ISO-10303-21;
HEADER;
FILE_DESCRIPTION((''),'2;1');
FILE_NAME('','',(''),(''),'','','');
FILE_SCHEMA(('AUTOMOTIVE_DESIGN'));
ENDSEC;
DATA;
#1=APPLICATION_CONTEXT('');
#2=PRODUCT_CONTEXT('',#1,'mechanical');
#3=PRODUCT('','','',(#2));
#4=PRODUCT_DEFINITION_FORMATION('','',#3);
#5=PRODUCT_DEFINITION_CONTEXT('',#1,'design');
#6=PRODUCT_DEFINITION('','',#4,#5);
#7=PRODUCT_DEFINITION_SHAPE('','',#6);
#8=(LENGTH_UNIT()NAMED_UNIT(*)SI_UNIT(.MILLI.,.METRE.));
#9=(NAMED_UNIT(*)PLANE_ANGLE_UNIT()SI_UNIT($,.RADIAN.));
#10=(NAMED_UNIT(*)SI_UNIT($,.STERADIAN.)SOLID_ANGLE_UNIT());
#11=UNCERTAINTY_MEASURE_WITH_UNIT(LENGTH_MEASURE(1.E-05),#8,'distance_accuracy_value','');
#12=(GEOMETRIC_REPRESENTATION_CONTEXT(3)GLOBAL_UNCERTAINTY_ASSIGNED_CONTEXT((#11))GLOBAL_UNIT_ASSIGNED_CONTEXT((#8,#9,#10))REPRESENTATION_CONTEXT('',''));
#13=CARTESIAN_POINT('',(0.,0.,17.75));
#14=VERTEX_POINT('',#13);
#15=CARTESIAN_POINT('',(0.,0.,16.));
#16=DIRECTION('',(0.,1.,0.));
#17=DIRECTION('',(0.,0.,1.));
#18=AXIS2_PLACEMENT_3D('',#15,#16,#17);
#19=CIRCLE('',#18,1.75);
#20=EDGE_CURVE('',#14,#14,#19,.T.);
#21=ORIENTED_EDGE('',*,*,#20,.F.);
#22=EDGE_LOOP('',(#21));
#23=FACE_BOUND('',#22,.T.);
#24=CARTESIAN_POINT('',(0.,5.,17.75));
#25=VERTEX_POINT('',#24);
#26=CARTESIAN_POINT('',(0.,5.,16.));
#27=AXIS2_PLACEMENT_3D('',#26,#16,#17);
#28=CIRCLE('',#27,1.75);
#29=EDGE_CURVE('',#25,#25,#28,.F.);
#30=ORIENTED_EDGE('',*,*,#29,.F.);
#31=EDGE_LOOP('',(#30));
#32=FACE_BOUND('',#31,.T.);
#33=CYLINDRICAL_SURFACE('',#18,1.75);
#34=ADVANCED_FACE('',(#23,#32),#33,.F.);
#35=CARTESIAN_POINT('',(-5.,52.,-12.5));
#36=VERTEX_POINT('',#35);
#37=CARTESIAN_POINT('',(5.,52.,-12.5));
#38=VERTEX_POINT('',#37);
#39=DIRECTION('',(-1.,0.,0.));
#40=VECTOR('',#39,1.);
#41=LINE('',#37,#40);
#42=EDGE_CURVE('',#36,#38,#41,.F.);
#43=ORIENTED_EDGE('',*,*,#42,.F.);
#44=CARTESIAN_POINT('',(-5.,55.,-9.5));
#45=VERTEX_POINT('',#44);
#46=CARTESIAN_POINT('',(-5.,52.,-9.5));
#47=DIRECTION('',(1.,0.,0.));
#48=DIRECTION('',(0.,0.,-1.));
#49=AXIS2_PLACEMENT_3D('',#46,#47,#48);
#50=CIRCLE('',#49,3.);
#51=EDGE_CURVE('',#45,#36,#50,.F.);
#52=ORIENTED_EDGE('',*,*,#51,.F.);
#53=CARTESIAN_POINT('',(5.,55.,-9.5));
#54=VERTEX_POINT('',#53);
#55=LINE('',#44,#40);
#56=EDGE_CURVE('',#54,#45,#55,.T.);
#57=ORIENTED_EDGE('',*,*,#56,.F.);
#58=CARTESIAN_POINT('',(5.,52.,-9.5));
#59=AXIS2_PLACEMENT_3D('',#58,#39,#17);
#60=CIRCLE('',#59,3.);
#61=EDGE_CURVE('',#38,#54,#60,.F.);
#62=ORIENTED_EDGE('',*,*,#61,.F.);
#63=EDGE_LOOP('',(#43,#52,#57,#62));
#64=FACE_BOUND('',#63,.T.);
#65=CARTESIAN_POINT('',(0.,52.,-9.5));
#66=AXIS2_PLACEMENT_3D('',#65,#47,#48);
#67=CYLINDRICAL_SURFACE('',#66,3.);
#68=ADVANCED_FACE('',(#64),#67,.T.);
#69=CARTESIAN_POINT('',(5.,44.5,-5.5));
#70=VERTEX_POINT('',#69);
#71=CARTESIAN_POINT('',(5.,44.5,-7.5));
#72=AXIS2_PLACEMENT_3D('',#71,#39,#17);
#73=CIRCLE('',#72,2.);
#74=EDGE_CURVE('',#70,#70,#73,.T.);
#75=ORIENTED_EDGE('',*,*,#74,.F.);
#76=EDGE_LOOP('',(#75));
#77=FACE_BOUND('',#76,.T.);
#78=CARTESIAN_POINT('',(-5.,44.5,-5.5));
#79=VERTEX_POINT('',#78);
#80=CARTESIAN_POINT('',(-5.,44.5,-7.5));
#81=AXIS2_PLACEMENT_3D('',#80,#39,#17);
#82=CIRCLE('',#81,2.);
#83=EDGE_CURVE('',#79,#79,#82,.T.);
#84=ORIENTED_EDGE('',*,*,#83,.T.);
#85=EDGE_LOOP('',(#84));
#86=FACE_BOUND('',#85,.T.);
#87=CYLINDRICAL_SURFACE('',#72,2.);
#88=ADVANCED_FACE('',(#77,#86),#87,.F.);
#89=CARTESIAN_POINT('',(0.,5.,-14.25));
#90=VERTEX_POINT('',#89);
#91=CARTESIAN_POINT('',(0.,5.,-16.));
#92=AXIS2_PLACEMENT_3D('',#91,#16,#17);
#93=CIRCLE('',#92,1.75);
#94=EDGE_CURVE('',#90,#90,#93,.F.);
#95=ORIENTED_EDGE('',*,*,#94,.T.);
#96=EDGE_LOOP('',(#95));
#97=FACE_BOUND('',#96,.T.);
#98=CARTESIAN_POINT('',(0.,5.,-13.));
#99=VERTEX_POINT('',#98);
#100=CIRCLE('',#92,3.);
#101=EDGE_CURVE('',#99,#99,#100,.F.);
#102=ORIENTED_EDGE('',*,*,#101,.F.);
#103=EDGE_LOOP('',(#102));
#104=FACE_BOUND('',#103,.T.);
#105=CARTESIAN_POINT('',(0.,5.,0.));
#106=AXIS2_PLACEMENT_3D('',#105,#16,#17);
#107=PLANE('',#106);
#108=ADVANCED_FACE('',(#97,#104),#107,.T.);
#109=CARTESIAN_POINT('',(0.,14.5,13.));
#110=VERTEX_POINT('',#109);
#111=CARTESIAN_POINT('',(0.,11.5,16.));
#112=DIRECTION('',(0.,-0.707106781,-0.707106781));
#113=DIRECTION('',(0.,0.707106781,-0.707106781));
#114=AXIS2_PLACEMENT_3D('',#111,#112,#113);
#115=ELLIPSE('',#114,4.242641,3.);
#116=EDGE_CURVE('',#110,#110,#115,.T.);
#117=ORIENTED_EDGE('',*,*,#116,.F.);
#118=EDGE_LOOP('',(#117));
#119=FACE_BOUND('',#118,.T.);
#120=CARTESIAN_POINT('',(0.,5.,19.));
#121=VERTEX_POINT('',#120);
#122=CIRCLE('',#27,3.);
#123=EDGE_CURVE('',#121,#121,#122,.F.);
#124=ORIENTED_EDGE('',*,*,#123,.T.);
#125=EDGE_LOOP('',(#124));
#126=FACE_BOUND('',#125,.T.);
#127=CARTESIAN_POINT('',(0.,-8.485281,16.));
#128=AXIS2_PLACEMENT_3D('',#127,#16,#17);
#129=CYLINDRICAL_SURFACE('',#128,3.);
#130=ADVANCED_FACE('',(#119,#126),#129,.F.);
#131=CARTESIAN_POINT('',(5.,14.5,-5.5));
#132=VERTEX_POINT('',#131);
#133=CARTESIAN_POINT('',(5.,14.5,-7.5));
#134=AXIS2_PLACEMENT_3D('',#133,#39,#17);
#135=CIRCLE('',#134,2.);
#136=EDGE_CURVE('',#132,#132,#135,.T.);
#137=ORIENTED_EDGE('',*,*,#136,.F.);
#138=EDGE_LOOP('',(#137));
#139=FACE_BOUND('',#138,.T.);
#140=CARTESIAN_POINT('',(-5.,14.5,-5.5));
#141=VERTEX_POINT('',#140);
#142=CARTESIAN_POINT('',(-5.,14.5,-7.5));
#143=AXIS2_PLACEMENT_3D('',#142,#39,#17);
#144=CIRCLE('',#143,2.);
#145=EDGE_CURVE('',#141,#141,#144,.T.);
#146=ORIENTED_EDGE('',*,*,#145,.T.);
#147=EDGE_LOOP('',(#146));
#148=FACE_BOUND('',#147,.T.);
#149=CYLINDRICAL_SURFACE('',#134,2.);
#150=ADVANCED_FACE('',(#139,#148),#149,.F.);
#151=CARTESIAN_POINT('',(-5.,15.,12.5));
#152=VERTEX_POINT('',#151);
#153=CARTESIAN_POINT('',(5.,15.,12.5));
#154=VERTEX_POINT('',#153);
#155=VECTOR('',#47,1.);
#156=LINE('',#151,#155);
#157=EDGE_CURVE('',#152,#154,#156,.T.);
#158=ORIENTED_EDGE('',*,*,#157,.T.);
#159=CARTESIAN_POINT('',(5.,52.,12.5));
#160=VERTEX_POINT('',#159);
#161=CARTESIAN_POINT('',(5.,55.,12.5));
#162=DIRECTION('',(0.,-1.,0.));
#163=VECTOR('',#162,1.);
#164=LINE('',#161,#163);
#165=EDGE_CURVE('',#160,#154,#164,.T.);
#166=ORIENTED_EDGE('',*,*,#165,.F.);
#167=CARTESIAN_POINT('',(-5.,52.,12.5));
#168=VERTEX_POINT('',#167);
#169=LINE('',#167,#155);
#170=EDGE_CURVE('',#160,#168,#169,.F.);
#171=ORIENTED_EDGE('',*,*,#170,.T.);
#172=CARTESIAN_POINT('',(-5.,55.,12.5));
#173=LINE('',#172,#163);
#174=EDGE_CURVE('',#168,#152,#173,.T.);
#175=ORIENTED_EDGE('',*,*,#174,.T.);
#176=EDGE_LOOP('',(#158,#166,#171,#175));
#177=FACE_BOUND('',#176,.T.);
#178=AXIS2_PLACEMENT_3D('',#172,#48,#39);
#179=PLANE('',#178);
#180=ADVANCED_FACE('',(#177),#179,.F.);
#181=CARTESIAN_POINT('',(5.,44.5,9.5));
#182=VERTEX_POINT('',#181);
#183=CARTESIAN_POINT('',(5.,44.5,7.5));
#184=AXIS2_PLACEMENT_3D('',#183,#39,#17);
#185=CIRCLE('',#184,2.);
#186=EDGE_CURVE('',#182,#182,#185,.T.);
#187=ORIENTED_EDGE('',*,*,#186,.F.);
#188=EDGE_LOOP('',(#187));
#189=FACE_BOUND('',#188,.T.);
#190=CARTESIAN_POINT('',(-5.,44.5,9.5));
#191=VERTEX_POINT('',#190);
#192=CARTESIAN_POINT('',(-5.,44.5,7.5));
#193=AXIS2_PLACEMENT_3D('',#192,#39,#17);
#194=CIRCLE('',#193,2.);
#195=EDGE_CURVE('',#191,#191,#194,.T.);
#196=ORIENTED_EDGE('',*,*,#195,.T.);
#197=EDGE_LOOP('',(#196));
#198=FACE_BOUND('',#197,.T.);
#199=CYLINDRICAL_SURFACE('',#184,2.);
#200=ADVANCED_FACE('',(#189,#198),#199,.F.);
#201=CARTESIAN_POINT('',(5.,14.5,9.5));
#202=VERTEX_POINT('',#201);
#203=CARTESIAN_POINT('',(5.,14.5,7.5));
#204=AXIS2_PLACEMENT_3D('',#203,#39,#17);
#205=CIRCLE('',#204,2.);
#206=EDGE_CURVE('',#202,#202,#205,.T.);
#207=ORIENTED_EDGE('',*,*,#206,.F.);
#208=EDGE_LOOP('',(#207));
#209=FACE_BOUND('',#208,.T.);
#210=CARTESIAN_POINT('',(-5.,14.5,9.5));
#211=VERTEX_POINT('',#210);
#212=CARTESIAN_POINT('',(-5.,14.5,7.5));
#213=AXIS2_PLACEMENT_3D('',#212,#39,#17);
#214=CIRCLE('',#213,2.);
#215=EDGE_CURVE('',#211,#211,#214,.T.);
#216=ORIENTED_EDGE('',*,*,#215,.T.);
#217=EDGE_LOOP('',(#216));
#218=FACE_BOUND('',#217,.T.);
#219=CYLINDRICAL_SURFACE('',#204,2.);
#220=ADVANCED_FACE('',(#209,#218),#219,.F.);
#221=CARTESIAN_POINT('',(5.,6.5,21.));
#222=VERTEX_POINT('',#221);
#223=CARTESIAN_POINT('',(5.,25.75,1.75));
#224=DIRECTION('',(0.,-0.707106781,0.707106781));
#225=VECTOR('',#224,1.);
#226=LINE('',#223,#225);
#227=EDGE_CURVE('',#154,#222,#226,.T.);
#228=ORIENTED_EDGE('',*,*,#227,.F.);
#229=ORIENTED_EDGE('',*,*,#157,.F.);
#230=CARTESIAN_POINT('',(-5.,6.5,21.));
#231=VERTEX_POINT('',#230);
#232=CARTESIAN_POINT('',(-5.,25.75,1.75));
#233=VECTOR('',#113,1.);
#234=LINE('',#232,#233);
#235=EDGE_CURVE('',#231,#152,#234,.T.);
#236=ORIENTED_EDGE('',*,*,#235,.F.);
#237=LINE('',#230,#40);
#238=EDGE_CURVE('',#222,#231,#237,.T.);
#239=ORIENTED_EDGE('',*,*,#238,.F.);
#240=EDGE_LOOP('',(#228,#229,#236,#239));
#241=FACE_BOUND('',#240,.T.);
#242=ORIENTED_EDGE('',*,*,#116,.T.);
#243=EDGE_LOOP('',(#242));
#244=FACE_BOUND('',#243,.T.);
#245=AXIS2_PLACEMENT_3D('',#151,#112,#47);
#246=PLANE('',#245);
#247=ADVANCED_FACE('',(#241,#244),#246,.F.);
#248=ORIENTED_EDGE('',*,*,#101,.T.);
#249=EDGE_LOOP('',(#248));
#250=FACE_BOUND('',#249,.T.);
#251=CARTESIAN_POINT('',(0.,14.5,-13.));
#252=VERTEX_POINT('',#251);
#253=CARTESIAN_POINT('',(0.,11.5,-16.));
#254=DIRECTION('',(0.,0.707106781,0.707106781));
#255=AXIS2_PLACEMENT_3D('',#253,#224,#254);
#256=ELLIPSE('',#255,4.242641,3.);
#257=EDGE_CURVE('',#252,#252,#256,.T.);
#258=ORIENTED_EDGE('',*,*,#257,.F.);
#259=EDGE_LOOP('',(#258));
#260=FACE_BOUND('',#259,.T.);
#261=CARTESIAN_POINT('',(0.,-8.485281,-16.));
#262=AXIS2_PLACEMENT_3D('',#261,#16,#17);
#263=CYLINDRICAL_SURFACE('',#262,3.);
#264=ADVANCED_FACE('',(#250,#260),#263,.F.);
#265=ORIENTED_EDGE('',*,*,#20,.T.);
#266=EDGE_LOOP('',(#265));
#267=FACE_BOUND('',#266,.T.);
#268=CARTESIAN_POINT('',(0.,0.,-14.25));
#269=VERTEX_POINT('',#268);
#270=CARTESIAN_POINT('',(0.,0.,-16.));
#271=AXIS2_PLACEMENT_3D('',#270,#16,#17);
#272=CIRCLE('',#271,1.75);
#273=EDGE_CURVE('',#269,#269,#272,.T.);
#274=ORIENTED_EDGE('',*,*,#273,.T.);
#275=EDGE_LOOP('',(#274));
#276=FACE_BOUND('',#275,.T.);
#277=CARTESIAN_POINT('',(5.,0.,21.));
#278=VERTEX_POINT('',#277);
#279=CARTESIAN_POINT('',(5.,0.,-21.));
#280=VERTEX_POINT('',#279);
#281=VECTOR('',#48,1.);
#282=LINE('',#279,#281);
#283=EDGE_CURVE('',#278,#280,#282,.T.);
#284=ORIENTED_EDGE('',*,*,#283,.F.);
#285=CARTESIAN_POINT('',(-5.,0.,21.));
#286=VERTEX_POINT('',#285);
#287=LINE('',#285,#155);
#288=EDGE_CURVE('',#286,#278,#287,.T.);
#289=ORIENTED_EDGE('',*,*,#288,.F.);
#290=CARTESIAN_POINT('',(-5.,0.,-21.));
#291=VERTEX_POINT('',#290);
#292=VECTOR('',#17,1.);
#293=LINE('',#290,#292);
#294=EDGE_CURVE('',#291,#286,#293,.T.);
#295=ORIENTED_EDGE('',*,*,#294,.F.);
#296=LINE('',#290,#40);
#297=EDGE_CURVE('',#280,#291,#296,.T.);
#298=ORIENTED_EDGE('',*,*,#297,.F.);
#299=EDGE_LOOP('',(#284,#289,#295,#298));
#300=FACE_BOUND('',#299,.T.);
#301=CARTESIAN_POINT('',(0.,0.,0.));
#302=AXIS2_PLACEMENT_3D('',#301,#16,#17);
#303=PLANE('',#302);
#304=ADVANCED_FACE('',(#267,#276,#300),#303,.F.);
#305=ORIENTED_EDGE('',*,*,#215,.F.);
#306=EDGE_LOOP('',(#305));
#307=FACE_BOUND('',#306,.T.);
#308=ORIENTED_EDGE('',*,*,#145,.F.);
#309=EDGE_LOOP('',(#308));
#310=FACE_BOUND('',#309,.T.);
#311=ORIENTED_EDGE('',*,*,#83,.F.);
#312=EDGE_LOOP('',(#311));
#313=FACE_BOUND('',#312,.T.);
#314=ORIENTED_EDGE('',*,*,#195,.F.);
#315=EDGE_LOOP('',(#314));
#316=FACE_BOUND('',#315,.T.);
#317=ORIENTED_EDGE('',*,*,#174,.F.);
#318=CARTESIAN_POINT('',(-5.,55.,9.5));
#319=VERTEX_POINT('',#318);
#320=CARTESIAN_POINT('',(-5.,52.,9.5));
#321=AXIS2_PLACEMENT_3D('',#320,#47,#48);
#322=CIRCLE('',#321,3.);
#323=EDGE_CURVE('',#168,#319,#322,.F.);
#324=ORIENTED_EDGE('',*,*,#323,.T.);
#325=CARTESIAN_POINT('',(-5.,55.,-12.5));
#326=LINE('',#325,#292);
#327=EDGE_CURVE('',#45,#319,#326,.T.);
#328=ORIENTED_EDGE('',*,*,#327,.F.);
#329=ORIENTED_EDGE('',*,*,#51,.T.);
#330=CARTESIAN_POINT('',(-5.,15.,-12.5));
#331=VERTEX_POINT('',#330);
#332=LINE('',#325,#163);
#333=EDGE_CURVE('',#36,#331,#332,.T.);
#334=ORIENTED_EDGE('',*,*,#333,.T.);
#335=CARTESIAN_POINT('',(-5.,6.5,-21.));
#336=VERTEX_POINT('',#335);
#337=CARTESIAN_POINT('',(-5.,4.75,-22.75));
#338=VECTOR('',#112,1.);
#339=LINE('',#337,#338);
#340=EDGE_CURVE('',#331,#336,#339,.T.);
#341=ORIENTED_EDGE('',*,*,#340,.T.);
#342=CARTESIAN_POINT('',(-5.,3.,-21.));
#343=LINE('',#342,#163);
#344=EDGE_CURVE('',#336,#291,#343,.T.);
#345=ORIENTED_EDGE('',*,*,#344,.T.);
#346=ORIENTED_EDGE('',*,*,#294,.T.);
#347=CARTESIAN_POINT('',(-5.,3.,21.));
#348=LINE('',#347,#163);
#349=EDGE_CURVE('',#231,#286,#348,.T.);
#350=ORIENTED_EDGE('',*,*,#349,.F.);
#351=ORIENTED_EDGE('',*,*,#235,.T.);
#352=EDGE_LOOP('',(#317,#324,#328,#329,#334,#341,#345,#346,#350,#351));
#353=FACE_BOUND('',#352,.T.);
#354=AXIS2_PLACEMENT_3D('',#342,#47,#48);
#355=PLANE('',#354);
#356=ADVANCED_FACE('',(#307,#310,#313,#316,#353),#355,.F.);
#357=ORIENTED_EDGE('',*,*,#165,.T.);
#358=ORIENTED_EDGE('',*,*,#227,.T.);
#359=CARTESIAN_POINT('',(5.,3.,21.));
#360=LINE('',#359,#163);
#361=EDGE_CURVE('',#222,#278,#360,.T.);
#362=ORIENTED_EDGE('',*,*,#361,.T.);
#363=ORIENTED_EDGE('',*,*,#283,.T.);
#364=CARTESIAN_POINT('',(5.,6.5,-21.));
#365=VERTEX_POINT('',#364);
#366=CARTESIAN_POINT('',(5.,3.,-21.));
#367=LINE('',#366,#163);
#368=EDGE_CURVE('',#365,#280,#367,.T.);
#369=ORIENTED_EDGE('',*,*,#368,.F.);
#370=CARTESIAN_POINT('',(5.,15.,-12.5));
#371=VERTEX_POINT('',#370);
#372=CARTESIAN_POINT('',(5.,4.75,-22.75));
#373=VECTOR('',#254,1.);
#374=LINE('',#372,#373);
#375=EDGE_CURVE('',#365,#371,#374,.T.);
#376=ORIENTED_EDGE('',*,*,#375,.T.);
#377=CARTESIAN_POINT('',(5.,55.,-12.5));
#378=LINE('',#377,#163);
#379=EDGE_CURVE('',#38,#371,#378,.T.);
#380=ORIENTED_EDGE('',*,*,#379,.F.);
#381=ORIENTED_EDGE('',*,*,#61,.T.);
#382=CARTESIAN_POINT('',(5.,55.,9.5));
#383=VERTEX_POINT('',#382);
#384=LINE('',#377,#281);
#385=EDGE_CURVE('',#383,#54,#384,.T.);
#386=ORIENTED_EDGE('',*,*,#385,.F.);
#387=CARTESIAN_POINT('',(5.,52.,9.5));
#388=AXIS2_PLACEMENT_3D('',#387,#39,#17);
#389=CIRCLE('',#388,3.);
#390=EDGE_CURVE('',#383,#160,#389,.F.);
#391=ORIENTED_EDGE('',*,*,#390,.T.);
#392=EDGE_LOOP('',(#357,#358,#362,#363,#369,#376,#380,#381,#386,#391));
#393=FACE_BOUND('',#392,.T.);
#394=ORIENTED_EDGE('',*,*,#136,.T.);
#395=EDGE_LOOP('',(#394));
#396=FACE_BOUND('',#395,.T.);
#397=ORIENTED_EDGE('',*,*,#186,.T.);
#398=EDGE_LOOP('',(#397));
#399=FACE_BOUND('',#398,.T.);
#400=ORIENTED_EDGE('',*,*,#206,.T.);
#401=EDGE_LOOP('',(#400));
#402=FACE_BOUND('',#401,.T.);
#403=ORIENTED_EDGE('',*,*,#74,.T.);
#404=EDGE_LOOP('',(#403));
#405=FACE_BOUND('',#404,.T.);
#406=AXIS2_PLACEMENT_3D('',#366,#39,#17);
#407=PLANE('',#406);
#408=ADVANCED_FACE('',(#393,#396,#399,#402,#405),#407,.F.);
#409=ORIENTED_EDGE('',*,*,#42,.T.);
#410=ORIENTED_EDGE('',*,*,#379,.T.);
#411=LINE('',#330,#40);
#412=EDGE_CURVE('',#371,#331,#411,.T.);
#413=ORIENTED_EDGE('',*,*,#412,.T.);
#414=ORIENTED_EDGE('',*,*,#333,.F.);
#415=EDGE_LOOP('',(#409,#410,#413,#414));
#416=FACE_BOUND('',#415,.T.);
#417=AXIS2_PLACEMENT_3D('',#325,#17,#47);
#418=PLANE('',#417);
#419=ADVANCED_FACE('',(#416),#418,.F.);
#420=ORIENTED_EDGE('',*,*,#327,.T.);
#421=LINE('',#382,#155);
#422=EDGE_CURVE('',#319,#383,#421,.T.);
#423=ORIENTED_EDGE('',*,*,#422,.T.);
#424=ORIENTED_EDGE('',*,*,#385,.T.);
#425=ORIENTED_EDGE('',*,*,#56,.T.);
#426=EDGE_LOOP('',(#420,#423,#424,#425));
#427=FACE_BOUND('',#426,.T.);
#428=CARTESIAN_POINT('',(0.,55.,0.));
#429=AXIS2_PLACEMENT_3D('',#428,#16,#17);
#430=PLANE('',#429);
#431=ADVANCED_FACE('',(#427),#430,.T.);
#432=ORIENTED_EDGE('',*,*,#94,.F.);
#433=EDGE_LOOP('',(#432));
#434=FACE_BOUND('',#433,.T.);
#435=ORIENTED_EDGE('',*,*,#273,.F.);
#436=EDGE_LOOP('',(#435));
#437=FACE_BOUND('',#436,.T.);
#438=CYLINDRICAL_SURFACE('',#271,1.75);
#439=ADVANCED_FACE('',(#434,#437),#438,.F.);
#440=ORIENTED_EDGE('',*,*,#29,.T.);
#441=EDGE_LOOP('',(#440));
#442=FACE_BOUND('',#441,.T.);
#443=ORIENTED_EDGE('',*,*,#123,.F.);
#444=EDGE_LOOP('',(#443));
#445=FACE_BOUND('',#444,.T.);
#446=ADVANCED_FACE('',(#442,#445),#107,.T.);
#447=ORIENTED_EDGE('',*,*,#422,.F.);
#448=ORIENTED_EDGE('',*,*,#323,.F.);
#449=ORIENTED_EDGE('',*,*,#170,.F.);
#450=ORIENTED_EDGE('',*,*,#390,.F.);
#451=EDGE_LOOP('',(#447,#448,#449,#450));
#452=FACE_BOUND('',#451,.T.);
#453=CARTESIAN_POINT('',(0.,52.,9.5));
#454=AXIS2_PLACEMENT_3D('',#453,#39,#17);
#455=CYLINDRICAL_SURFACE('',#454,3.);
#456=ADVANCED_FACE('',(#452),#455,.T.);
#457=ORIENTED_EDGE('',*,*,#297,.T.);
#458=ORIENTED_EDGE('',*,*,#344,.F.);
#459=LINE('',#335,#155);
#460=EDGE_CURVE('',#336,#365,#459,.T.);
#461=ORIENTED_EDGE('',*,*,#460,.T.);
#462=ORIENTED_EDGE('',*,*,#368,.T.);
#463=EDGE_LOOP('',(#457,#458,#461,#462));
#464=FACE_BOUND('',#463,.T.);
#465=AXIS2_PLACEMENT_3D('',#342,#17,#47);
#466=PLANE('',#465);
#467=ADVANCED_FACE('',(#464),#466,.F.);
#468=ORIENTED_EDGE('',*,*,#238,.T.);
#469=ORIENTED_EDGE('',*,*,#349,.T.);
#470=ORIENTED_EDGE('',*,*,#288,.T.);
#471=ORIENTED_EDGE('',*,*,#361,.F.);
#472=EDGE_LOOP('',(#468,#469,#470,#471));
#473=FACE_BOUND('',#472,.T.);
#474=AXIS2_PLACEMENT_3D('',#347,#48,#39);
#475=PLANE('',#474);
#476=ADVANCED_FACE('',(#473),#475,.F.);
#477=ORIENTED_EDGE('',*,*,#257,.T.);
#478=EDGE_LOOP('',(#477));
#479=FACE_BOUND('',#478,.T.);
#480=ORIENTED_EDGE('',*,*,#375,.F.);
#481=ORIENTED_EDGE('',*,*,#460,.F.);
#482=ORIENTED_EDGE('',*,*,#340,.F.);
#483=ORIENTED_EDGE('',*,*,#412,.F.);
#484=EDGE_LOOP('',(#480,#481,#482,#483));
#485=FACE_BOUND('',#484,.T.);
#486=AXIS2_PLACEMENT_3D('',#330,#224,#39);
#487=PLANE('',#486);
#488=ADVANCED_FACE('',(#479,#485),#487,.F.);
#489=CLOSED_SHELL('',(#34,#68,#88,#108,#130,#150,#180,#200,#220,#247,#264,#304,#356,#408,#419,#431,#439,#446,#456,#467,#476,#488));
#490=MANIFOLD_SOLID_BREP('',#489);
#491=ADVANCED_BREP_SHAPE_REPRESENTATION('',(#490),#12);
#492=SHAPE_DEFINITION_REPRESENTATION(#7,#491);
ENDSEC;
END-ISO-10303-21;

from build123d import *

# Parameters (mm, degrees)
SKETCH1_W           = 10
SKETCH1_H           = 42
BOSS_EXTRUDE1_DEPTH = 3
SKETCH7_W           = 10
SKETCH7_H           = 25
BOSS_EXTRUDE4_DEPTH = 52
CHAMFER2_SIZE       = 12
SKETCH8_R           = 1.75
CUT_EXTRUDE1_DEPTH  = 60.084684987
SKETCH9_R           = 3
CUT_EXTRUDE2_DEPTH  = 50
FILLET1_R           = 3
SKETCH10_R          = 2
CUT_EXTRUDE3_DEPTH  = 60.715994507


with BuildPart() as part:
    # Sketch1 → Boss-Extrude1 (new body)
    with BuildSketch(Plane(origin=(0, 0, 0), x_dir=(1, 0, 0), z_dir=(0, 1, 0))):
        Rectangle(SKETCH1_W, SKETCH1_H)
    extrude(amount=BOSS_EXTRUDE1_DEPTH)

    # Sketch7 → Boss-Extrude4 (add)
    with BuildSketch(Plane(origin=(0, 3, 0), x_dir=(1, 0, 0), z_dir=(0, 1, 0))):
        Rectangle(SKETCH7_W, SKETCH7_H)
    extrude(amount=BOSS_EXTRUDE4_DEPTH)

    # Chamfer2
    # the kernel refuses this chamfer: 12 mm, written as the material it adds along each edge
    with BuildSketch(Plane(origin=(5, 3, 12.5), x_dir=(0, -0.02749587661058638, 0.9996219169112968), z_dir=(-1, 0, 0))) as chamfer2_piece_1_section:
        Polygon((CHAMFER2_SIZE * 0.999621916911, CHAMFER2_SIZE * 0.0274958766106), (-CHAMFER2_SIZE * 0.0274958766106, CHAMFER2_SIZE * 0.999621916911), (0, 0), align=None)
    chamfer2_piece_1 = extrude(amount=10, mode=Mode.PRIVATE)
    chamfer2_piece_1 = split(chamfer2_piece_1, bisect_by=Plane(origin=(0, 7.292994705, 21), z_dir=(0, 0, -1)), keep=Keep.TOP, mode=Mode.PRIVATE)
    add(chamfer2_piece_1)
    with BuildSketch(Plane(origin=(-5, 3, -12.5), x_dir=(0, -0.02749587661058638, -0.9996219169112968), z_dir=(1, 0, 0))) as chamfer2_piece_2_section:
        Polygon((CHAMFER2_SIZE * 0.999621916911, CHAMFER2_SIZE * 0.0274958766106), (-CHAMFER2_SIZE * 0.0274958766106, CHAMFER2_SIZE * 0.999621916911), (0, 0), align=None)
    chamfer2_piece_2 = extrude(amount=10, mode=Mode.PRIVATE)
    chamfer2_piece_2 = split(chamfer2_piece_2, bisect_by=Plane(origin=(0, 7.292994705, -21), z_dir=(0, 0, 1)), keep=Keep.TOP, mode=Mode.PRIVATE)
    add(chamfer2_piece_2)

    # Sketch8 → Cut-Extrude1 (cut, through all)
    with BuildSketch(Plane(origin=(0, 55, 0), x_dir=(1, 0, 0), z_dir=(0, 1, 0))):
        with Locations(Location((0, 16, 0), (0, 0, 270))):
            Circle(SKETCH8_R)
        with Locations(Location((0, -16, 0), (0, 0, 270))):
            Circle(SKETCH8_R)
    extrude(amount=-CUT_EXTRUDE1_DEPTH, mode=Mode.SUBTRACT)

    # Sketch9 → Cut-Extrude2 (cut)
    with BuildSketch(Plane(origin=(0, 55, 0), x_dir=(1, 0, 0), z_dir=(0, 1, 0))):
        with Locations(Location((0, 16, 0), (0, 0, 270))):
            Circle(SKETCH9_R)
        with Locations(Location((0, -16, 0), (0, 0, 270))):
            Circle(SKETCH9_R)
    extrude(amount=-CUT_EXTRUDE2_DEPTH, mode=Mode.SUBTRACT)

    # Fillet1
    fillet1_edges = [part.edges().sort_by_distance(p)[0] for p in [
        (0, 55, -12.5),
        (0, 55, 12.5),
    ]]
    fillet(fillet1_edges, radius=FILLET1_R)

    # Sketch10 → Cut-Extrude3 (cut, through all)
    with BuildSketch(Plane.ZY.offset(5)):
        with Locations((-7.5, 14.5)):
            Circle(SKETCH10_R)
        with Locations((7.5, 14.5)):
            Circle(SKETCH10_R)
        with Locations((-7.5, 44.5)):
            Circle(SKETCH10_R)
        with Locations((7.5, 44.5)):
            Circle(SKETCH10_R)
    extrude(amount=-CUT_EXTRUDE3_DEPTH, mode=Mode.SUBTRACT)


solid = part.part
